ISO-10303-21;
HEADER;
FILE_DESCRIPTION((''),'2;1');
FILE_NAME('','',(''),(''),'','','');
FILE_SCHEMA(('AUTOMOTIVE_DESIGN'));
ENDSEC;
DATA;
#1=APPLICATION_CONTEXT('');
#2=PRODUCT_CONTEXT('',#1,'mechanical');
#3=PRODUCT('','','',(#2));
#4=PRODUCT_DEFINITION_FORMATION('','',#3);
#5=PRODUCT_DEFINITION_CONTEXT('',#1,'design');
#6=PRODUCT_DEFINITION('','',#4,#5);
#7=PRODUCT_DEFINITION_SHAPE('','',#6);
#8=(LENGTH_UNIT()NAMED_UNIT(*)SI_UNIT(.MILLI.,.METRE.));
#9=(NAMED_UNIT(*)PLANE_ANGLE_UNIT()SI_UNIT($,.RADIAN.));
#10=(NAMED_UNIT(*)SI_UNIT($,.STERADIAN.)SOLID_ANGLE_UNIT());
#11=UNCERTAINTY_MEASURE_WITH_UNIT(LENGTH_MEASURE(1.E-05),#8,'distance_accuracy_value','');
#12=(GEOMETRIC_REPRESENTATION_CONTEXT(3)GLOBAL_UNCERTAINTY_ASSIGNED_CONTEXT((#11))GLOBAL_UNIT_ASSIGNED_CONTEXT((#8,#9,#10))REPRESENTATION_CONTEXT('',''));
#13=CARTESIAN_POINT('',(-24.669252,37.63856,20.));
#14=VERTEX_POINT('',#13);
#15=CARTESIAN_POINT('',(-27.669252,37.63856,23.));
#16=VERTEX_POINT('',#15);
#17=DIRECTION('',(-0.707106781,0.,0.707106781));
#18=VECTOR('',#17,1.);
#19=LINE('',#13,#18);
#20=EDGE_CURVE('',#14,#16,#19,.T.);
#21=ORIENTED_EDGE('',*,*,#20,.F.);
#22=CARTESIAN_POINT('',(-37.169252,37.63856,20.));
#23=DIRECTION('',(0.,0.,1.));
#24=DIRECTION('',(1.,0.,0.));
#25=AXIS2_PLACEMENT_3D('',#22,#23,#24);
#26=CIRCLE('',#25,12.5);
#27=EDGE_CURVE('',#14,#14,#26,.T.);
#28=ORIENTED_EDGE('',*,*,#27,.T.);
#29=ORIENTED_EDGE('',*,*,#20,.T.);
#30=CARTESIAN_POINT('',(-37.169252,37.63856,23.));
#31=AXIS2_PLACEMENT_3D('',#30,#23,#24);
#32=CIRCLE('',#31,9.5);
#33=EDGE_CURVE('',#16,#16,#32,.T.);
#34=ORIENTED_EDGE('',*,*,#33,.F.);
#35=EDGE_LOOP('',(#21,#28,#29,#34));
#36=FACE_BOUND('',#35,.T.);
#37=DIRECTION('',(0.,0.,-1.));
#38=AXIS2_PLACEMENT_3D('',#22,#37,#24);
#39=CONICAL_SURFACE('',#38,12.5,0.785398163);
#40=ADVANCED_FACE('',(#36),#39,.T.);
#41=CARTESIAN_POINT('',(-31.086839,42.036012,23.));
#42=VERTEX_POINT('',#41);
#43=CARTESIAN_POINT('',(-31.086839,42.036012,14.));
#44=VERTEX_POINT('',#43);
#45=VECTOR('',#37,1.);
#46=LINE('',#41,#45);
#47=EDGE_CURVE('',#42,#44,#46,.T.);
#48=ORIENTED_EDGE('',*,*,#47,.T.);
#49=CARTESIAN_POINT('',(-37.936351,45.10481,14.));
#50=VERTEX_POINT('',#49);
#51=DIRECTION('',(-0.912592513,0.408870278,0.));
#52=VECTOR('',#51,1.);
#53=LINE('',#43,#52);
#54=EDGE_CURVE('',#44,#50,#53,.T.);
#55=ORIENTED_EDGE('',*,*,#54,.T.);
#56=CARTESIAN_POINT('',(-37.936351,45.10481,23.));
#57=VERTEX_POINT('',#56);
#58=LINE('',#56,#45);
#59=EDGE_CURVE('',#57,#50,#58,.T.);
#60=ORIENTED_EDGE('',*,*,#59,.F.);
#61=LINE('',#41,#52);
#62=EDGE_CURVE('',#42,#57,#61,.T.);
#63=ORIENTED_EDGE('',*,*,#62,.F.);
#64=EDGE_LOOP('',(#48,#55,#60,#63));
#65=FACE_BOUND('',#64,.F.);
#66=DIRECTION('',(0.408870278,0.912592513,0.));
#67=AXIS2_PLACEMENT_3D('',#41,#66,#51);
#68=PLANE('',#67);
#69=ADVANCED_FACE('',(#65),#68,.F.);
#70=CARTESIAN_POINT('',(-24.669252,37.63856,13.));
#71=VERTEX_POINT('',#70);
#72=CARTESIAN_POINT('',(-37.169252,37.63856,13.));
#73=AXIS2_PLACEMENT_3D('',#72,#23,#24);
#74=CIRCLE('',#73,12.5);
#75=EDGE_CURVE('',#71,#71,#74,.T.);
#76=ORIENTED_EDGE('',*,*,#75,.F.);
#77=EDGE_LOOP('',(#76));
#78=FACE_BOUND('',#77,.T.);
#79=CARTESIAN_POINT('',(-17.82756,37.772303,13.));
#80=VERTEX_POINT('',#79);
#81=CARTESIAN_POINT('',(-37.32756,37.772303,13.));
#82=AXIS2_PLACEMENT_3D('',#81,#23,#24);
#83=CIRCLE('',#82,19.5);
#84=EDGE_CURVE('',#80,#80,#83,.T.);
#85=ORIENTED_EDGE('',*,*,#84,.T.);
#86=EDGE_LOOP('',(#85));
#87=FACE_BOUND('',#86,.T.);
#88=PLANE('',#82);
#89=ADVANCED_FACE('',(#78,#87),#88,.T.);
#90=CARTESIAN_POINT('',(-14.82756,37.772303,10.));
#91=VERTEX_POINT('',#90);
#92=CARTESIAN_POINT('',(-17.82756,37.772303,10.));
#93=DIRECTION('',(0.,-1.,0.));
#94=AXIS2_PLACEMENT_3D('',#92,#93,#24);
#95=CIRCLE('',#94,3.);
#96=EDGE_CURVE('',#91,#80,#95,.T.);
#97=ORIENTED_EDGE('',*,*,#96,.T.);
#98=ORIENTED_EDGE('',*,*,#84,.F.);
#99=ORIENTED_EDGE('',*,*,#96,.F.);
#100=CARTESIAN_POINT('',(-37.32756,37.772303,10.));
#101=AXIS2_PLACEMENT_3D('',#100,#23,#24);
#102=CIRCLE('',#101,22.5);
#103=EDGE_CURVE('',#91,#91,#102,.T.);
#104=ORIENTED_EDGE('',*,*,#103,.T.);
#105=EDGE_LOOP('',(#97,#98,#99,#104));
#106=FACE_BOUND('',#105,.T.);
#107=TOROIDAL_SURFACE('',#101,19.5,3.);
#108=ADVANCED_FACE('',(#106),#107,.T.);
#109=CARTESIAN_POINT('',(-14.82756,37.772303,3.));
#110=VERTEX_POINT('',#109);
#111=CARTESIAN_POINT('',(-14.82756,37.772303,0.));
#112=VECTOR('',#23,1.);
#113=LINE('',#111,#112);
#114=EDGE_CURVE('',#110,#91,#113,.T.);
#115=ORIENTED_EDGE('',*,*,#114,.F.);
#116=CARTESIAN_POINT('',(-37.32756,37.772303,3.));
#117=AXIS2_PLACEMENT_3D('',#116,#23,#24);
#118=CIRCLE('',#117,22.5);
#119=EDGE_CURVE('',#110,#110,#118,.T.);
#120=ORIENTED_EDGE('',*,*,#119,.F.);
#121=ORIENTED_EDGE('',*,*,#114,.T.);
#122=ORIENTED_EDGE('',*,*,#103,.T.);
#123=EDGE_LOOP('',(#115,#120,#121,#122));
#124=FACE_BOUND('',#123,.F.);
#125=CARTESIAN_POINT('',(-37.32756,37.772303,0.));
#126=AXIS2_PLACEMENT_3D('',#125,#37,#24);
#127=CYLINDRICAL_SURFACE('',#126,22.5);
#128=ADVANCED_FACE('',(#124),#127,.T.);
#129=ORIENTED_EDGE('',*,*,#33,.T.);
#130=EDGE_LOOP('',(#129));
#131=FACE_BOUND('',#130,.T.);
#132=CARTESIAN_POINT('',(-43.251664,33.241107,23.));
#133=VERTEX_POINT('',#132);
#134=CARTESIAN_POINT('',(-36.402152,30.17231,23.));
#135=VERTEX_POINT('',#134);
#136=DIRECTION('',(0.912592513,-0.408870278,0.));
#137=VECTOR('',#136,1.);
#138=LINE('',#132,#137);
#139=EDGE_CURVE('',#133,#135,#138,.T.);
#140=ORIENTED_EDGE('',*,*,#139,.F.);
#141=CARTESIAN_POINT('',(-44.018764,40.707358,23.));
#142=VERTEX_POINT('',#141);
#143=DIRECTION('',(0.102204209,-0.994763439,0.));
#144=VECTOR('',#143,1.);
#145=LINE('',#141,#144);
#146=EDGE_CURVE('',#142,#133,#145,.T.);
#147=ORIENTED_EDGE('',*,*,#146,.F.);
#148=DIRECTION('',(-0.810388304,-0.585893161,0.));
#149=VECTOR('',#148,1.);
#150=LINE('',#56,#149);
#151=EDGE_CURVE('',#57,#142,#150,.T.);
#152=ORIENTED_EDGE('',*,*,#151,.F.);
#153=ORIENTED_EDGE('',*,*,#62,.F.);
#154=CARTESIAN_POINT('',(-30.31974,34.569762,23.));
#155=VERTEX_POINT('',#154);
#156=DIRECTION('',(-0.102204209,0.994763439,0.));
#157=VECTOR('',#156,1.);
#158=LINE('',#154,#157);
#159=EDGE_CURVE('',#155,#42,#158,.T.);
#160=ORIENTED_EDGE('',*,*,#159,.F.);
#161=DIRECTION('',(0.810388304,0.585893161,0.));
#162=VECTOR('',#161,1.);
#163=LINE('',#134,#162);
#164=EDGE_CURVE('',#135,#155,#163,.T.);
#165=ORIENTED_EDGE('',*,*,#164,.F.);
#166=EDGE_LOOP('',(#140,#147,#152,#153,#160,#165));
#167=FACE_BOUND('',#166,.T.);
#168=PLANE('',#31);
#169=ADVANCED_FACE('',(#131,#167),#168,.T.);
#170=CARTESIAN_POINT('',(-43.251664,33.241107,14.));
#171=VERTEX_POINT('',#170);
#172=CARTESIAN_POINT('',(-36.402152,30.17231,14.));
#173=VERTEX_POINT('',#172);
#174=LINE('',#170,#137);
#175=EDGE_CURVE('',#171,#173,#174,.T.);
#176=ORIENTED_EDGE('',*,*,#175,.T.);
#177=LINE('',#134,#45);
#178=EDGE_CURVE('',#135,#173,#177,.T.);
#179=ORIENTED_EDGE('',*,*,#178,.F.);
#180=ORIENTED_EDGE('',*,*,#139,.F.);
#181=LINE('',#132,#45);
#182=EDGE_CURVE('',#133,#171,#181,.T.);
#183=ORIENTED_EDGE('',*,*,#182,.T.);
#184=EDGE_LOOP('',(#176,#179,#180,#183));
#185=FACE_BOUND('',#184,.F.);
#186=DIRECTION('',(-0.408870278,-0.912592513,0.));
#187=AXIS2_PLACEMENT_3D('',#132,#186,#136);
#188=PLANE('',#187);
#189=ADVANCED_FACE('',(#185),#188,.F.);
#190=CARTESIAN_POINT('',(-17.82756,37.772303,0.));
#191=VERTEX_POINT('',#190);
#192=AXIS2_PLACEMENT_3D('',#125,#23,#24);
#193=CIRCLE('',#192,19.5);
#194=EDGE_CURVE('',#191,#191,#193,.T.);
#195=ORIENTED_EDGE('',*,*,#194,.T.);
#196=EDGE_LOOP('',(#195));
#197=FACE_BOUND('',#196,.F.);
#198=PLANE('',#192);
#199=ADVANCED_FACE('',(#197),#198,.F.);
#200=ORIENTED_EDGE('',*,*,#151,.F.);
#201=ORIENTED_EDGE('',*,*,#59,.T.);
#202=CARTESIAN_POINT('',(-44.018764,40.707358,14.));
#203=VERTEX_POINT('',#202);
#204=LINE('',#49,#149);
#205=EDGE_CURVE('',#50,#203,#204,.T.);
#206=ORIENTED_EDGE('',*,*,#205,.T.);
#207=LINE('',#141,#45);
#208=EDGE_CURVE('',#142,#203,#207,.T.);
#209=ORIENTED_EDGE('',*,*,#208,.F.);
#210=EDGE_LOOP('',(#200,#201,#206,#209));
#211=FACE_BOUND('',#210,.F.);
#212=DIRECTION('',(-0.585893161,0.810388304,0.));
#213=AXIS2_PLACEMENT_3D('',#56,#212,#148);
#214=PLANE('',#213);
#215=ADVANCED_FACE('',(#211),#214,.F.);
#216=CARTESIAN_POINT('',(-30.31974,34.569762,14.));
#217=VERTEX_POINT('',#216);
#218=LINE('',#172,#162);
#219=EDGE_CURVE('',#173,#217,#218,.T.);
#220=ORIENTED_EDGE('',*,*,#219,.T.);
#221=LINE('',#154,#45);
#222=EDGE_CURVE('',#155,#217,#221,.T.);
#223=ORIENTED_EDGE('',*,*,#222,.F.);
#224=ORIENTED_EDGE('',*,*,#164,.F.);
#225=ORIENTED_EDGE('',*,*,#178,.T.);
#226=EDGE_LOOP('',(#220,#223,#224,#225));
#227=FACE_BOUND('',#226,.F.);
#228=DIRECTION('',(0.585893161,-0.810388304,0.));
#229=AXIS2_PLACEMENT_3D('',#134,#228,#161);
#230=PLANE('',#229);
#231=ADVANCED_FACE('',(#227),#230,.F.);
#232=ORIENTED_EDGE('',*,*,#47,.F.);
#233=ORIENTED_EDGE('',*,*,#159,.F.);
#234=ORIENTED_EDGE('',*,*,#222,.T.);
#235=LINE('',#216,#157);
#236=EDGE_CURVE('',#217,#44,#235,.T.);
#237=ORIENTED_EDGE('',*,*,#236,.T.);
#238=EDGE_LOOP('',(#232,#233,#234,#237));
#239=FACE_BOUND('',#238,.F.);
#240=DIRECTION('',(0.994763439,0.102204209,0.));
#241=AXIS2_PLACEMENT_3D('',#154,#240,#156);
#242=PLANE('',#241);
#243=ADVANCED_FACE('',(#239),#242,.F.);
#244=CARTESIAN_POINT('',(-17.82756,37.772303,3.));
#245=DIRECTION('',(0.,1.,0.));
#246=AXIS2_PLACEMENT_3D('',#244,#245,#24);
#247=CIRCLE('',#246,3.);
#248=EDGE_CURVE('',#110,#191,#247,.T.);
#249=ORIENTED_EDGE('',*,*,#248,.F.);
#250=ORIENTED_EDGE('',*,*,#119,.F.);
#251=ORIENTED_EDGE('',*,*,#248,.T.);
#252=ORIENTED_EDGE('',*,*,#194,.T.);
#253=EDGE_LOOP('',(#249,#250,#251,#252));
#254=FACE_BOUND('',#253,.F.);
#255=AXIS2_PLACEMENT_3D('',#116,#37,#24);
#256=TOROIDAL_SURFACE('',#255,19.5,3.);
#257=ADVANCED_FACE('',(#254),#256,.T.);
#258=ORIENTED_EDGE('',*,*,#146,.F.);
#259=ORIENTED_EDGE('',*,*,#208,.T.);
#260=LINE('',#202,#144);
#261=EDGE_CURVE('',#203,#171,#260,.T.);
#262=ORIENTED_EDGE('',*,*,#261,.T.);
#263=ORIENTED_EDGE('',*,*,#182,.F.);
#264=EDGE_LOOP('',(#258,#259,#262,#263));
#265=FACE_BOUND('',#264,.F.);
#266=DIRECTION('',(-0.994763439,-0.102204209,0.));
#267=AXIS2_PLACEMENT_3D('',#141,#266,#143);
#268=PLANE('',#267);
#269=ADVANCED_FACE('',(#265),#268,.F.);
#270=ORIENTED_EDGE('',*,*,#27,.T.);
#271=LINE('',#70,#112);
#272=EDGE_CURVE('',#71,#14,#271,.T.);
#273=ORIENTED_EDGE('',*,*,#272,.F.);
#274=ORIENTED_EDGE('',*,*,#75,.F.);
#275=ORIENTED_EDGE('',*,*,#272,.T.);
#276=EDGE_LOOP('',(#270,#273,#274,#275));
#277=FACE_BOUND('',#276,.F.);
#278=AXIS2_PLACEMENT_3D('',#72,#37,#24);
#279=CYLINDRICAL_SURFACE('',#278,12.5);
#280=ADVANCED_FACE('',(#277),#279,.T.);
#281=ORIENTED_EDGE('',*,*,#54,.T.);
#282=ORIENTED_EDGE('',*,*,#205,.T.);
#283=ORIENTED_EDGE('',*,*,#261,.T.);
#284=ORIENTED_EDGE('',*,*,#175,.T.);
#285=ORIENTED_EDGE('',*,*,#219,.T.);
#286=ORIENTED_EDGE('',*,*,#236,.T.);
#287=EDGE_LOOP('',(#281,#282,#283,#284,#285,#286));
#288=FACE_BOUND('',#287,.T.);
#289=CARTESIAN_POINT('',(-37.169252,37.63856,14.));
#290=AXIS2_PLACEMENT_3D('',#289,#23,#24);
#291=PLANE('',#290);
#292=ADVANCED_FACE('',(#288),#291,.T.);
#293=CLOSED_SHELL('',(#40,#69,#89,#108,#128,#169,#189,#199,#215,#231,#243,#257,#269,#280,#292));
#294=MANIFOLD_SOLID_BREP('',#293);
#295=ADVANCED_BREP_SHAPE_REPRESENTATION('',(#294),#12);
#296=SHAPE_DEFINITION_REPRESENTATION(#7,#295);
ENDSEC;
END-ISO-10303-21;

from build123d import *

# Parameters (mm, degrees)
F1_R     = 12.5
F2_DEPTH = 13
F0_R     = 22.5
F3_DEPTH = 10
F5_R     = 3
F6_SIZE  = 3
F8_DEPTH = 9


# Not quite as in the source:
# - the program builds the solid bodies; features that only make, move or delete a surface that nothing else refers to are left out


with BuildPart() as f2:
    # F1 (on Top) → F2 (new body)
    with BuildSketch(Plane.XY):
        with Locations((-37.169251591, 37.6385599375)):
            Circle(F1_R)
    extrude(amount=F2_DEPTH)

    # F3 (add): a face of the model
    f3_faces = [f2.faces().sort_by_distance(p)[0] for p in [
        (-37.169251591, 37.6385599375, 13),
    ]]


with BuildPart() as f2b:
    # F0 (on Top) → F2, piece 2 (new body)
    with BuildSketch(Plane.XY):
        with Locations((-37.3275603359, 37.7723030881)):
            Circle(F0_R)
    extrude(amount=F2_DEPTH)


with BuildPart() as f2_1:
    add(f2.part)

    add(f2b.part)  # F3 merges F2b
    extrude(f3_faces, amount=F3_DEPTH)

    # F5
    f5_edges = [f2_1.edges().sort_by_distance(p)[0] for p in [
        (-59.82756, 37.772303, 13),
        (-59.82756, 37.772303, 0),
    ]]
    fillet(f5_edges, radius=F5_R)

    # F6
    f6_edges = [f2_1.edges().sort_by_distance(p)[0] for p in [
        (-49.669252, 37.63856, 23),
    ]]
    chamfer(f6_edges, length=F6_SIZE)

    # F4 (on face) → F8 (cut)
    with BuildSketch(Plane.XY.offset(23)):
        Polygon((-36.4021524321, 30.1723097264), (-30.3197396578, 34.5697621907), (-31.0868388166, 42.0360124018), (-37.9363507498, 45.1048101485), (-44.0187635242, 40.7073576842), (-43.2516643653, 33.2411074732), align=None)
    extrude(amount=-F8_DEPTH, mode=Mode.SUBTRACT)


solid = f2_1.part
